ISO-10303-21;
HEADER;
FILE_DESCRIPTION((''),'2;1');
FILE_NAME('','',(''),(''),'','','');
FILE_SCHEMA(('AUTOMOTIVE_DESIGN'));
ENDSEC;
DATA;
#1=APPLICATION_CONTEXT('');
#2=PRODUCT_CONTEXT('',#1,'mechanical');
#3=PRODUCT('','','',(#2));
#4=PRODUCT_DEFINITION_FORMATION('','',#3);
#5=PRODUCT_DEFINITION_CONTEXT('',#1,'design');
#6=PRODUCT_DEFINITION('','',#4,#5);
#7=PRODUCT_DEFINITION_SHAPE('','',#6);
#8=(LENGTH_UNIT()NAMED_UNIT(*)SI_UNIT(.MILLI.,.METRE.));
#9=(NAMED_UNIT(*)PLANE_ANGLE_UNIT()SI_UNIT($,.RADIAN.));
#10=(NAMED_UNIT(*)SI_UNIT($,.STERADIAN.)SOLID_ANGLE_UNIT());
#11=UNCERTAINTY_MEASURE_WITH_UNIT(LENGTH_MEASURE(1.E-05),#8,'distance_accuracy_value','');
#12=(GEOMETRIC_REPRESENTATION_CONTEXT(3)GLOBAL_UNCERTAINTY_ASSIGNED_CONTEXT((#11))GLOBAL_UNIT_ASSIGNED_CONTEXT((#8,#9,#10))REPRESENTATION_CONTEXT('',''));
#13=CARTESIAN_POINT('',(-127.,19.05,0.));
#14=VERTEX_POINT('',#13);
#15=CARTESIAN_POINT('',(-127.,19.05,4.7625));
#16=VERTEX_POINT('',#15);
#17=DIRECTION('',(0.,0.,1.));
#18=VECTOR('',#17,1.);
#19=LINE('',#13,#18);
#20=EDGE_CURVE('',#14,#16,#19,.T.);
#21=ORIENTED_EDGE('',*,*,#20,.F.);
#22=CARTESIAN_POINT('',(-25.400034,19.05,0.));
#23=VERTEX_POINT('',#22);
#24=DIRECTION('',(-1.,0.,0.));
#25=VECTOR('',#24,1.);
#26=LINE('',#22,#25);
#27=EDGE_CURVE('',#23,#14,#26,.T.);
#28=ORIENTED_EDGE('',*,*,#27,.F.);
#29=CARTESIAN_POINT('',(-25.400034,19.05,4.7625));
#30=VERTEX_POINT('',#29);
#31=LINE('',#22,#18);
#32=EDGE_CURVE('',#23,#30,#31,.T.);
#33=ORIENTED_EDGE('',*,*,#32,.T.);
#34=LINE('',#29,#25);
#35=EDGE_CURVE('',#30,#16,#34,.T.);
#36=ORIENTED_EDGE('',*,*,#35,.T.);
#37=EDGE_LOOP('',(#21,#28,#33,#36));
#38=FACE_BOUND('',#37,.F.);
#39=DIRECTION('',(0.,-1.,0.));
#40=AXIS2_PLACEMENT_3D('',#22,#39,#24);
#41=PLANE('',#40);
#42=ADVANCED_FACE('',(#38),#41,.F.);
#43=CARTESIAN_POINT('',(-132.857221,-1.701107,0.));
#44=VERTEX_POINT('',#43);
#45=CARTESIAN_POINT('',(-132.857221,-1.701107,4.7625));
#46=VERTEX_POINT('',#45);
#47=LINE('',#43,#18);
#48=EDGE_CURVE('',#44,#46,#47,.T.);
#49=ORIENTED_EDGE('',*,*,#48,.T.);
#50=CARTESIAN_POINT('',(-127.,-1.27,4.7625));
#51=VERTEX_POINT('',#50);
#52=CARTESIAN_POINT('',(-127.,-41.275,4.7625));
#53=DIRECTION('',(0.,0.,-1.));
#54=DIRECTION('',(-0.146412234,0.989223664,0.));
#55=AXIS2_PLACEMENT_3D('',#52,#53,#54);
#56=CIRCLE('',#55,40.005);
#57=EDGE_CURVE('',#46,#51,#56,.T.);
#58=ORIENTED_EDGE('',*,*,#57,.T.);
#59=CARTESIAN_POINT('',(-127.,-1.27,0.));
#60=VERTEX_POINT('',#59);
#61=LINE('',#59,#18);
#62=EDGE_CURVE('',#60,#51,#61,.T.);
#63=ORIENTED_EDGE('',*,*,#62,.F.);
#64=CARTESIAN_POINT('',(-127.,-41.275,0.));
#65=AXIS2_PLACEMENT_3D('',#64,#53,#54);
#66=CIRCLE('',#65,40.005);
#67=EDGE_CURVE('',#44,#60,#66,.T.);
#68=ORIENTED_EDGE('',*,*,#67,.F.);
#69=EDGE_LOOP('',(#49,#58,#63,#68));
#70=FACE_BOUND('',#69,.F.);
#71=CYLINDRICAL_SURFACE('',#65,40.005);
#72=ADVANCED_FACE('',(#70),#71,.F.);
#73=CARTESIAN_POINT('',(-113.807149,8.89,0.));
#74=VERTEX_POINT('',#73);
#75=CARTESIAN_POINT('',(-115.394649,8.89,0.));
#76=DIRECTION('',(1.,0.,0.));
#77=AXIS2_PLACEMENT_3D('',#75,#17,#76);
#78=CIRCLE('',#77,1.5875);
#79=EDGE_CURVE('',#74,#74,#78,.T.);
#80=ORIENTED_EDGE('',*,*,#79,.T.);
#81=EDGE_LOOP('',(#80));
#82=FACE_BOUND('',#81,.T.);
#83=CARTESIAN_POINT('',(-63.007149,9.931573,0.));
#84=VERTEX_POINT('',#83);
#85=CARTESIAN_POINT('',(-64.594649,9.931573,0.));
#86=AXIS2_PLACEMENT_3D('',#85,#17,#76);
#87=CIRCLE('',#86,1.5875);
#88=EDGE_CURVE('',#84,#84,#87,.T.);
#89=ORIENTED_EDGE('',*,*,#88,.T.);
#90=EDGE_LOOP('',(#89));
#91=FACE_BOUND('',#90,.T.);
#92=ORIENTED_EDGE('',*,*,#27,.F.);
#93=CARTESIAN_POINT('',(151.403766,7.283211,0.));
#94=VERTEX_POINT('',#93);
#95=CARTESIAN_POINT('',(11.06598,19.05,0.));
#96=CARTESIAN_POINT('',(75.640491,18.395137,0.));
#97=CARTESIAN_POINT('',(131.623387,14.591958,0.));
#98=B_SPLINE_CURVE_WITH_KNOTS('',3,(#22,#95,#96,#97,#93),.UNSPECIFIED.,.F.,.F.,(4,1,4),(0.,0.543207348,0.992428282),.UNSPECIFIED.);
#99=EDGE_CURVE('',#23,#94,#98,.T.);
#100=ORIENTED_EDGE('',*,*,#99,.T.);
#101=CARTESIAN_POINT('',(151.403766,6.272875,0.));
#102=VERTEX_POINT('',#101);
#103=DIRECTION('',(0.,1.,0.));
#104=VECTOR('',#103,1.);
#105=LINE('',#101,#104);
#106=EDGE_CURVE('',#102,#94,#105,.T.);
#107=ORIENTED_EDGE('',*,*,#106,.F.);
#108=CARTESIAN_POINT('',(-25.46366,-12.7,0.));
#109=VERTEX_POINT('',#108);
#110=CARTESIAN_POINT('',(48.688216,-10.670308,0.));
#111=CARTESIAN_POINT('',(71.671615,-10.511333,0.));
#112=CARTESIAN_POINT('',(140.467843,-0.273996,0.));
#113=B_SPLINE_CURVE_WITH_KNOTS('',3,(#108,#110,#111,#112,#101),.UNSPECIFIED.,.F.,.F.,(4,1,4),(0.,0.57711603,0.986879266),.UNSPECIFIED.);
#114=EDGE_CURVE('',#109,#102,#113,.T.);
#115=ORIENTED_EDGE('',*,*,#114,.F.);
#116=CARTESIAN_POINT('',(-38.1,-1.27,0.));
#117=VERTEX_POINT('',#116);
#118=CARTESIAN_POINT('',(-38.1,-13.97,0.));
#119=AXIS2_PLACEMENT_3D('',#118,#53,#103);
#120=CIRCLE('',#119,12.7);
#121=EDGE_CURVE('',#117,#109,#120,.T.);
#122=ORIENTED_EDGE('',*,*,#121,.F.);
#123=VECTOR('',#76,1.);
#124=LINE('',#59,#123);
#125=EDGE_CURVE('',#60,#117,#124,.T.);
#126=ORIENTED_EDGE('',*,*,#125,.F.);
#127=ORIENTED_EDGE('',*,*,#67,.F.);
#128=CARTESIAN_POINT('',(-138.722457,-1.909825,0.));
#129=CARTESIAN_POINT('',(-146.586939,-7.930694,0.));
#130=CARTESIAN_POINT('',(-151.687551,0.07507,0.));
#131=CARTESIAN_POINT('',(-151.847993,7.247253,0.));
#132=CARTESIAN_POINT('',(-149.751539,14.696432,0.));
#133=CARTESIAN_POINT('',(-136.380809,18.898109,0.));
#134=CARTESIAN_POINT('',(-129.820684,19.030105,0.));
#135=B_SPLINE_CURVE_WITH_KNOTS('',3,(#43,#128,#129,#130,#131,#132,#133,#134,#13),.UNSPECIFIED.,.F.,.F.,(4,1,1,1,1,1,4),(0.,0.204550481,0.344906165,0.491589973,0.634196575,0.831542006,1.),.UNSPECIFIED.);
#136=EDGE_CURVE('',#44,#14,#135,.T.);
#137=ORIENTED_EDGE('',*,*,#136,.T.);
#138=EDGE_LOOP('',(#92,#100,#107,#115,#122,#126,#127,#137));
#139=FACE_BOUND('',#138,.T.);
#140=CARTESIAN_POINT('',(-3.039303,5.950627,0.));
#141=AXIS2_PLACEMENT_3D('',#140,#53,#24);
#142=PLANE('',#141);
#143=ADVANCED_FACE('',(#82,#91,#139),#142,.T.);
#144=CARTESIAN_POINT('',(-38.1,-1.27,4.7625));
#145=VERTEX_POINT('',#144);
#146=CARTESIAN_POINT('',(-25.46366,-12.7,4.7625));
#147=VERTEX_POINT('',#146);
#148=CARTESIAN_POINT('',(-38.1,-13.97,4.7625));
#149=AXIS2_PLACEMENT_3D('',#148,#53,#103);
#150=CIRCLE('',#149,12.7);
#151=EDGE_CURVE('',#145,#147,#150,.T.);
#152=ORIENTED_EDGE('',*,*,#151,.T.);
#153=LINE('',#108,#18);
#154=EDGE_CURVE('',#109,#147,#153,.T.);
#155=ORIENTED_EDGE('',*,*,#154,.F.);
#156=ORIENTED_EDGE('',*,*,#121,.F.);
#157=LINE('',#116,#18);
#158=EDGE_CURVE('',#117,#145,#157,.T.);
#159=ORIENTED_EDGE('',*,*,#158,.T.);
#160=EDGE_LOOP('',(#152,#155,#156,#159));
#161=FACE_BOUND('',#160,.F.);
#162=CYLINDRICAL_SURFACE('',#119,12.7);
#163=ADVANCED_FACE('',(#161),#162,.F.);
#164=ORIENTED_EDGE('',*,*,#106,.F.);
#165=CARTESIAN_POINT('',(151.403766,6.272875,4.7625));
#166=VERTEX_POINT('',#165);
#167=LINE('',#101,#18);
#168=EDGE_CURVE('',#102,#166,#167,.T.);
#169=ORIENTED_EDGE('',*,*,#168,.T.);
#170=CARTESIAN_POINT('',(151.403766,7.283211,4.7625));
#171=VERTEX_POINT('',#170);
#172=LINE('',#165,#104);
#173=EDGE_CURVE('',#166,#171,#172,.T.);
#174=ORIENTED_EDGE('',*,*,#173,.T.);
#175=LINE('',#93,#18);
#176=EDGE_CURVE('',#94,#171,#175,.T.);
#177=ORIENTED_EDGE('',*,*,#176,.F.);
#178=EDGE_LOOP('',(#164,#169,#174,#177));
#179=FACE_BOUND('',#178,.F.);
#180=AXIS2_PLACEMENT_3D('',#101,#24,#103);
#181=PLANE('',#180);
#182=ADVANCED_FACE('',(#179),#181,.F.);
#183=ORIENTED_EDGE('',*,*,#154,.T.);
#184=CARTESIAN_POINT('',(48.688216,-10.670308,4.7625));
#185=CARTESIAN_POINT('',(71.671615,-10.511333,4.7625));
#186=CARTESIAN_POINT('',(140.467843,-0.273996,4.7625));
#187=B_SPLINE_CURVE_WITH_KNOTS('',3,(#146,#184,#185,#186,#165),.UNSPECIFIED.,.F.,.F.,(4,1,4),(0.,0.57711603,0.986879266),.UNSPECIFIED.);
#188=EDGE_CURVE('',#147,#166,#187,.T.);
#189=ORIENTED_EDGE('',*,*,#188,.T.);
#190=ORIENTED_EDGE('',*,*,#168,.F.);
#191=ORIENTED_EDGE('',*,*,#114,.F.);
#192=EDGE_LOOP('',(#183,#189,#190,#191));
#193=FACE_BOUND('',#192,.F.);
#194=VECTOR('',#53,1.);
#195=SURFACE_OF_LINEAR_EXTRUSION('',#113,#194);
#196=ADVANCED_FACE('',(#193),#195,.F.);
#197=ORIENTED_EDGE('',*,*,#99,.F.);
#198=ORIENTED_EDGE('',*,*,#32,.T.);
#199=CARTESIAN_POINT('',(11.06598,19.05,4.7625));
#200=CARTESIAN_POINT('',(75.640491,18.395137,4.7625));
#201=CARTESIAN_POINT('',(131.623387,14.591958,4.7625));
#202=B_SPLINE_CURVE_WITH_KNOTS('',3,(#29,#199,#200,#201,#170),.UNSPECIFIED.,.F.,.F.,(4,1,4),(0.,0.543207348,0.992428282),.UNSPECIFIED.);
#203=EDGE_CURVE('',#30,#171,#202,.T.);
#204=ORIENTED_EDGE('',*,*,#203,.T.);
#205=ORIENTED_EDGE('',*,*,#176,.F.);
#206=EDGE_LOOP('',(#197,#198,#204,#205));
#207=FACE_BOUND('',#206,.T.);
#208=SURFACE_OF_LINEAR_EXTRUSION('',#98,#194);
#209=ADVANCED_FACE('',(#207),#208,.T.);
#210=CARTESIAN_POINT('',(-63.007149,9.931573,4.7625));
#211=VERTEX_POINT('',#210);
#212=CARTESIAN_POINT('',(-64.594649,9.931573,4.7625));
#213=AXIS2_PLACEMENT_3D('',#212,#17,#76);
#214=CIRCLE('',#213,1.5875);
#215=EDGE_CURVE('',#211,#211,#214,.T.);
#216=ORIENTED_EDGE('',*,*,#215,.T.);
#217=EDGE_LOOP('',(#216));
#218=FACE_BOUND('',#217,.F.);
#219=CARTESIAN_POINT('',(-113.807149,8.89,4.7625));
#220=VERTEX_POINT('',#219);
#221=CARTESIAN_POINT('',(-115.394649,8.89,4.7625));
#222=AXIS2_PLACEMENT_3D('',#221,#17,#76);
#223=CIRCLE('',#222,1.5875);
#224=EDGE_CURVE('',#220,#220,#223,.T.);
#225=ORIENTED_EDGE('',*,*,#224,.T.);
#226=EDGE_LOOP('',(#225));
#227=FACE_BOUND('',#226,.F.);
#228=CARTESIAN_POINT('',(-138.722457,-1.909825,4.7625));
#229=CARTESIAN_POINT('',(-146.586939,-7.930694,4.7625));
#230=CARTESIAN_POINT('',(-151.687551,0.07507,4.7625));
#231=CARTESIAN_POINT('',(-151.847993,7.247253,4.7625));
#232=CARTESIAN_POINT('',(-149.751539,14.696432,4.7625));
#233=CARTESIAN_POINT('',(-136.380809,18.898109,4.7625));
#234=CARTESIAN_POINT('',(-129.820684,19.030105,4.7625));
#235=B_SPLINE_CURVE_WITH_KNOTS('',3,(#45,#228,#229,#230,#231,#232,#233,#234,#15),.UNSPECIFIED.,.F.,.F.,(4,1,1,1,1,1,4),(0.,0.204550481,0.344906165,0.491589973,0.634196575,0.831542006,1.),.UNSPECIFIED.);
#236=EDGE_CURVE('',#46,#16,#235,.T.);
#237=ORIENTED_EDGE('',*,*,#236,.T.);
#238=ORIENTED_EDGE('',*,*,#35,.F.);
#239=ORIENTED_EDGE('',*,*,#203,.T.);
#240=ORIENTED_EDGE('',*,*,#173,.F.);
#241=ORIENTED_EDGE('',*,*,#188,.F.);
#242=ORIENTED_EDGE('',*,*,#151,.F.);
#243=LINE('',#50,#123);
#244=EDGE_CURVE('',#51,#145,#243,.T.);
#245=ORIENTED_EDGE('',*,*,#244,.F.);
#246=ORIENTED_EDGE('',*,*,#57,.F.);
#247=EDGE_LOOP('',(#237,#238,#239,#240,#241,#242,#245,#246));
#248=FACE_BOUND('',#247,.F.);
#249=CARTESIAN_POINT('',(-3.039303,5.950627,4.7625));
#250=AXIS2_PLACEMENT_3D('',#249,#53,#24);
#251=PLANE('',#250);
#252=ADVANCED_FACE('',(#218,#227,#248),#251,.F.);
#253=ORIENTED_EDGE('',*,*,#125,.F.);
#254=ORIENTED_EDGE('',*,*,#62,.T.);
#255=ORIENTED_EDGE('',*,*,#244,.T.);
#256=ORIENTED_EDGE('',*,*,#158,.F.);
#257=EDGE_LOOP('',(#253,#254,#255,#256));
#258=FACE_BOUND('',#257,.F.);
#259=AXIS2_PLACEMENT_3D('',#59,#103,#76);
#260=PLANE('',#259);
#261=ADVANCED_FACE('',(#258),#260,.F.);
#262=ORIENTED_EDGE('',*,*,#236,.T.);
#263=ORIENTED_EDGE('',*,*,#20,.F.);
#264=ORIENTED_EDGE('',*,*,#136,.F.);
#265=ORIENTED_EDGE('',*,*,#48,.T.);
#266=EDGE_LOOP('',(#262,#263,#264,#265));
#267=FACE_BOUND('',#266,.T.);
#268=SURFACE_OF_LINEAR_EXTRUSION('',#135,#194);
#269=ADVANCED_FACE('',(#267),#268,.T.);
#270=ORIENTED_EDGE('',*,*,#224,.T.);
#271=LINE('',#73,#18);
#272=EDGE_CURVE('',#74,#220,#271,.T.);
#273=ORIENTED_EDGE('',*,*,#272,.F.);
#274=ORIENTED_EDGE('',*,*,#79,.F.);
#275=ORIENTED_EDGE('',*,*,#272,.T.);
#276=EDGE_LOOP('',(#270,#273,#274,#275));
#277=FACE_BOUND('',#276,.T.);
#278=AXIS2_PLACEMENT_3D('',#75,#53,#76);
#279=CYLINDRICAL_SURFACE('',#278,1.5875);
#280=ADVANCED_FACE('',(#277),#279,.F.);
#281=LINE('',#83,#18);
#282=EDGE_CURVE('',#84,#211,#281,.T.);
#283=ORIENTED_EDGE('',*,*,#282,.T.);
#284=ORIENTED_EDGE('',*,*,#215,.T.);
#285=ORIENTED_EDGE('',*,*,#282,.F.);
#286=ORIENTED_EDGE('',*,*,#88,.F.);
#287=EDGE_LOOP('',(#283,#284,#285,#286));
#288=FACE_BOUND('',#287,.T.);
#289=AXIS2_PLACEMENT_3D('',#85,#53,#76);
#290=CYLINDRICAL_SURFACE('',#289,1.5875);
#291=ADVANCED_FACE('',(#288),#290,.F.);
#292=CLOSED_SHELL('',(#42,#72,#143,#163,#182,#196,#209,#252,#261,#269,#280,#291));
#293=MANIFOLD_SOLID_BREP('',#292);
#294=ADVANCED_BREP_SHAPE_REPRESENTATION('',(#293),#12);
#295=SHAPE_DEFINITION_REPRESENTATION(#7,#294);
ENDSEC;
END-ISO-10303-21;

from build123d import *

# Parameters (mm, degrees)
F0_R     = 1.5875
F1_DEPTH = 4.7625


with BuildPart() as f1:
    # F0 (on Top) → F1 (new body)
    with BuildSketch(Plane.XY):
        with BuildLine():
            add(Edge.make_bspline(
                [(-25.4000339955, 19.0499999844), (11.0659803484, 19.0499999844), (75.6404907204, 18.3951374474), (131.6233865179, 14.5919578775), (151.4037655455, 7.2832109724)],
                knots=[0, 0, 0, 0, 0.5432073477, 0.9924282823, 0.9924282823, 0.9924282823, 0.9924282823], degree=3))
            Line((-25.4000339955, 19.0499999844), (-127, 19.0499999844))
            add(Edge.make_bspline(
                [(-132.8572214313, -1.7011073168), (-138.7224568365, -1.9098253759), (-146.5869393979, -7.9306938244), (-151.6875511275, 0.0750696788), (-151.8479933658, 7.2472530677), (-149.7515385788, 14.6964316511), (-136.3808090157, 18.8981087489), (-129.8206844988, 19.0301054596), (-127, 19.0499999844)],
                knots=[0, 0, 0, 0, 0.2045504807, 0.3449061653, 0.4915899731, 0.6341965753, 0.8315420062, 1, 1, 1, 1], degree=3))
            ThreePointArc((-132.8572214313, -1.7011073168), (-129.9365326669, -1.3779224016), (-127, -1.27))
            Line((-127, -1.27), (-38.1, -1.27))
            ThreePointArc((-38.1, -1.27), (-29.5805810057, -4.5514279214), (-25.4636595487, -12.7))
            add(Edge.make_bspline(
                [(-25.4636595487, -12.7), (48.6882164823, -10.6703078891), (71.671615255, -10.5113328002), (140.4678429521, -0.2739958712), (151.4037655455, 6.2728745575)],
                knots=[0, 0, 0, 0, 0.5771160301, 0.986879266, 0.986879266, 0.986879266, 0.986879266], degree=3))
            Line((151.4037655455, 6.2728745575), (151.4037655455, 7.2832109724))
        make_face()
        with Locations((-115.3946487784, 8.8899999844)):
            Circle(F0_R, mode=Mode.SUBTRACT)
        with Locations((-64.5946487784, 9.931572713)):
            Circle(F0_R, mode=Mode.SUBTRACT)
    extrude(amount=F1_DEPTH)


solid = f1.part
